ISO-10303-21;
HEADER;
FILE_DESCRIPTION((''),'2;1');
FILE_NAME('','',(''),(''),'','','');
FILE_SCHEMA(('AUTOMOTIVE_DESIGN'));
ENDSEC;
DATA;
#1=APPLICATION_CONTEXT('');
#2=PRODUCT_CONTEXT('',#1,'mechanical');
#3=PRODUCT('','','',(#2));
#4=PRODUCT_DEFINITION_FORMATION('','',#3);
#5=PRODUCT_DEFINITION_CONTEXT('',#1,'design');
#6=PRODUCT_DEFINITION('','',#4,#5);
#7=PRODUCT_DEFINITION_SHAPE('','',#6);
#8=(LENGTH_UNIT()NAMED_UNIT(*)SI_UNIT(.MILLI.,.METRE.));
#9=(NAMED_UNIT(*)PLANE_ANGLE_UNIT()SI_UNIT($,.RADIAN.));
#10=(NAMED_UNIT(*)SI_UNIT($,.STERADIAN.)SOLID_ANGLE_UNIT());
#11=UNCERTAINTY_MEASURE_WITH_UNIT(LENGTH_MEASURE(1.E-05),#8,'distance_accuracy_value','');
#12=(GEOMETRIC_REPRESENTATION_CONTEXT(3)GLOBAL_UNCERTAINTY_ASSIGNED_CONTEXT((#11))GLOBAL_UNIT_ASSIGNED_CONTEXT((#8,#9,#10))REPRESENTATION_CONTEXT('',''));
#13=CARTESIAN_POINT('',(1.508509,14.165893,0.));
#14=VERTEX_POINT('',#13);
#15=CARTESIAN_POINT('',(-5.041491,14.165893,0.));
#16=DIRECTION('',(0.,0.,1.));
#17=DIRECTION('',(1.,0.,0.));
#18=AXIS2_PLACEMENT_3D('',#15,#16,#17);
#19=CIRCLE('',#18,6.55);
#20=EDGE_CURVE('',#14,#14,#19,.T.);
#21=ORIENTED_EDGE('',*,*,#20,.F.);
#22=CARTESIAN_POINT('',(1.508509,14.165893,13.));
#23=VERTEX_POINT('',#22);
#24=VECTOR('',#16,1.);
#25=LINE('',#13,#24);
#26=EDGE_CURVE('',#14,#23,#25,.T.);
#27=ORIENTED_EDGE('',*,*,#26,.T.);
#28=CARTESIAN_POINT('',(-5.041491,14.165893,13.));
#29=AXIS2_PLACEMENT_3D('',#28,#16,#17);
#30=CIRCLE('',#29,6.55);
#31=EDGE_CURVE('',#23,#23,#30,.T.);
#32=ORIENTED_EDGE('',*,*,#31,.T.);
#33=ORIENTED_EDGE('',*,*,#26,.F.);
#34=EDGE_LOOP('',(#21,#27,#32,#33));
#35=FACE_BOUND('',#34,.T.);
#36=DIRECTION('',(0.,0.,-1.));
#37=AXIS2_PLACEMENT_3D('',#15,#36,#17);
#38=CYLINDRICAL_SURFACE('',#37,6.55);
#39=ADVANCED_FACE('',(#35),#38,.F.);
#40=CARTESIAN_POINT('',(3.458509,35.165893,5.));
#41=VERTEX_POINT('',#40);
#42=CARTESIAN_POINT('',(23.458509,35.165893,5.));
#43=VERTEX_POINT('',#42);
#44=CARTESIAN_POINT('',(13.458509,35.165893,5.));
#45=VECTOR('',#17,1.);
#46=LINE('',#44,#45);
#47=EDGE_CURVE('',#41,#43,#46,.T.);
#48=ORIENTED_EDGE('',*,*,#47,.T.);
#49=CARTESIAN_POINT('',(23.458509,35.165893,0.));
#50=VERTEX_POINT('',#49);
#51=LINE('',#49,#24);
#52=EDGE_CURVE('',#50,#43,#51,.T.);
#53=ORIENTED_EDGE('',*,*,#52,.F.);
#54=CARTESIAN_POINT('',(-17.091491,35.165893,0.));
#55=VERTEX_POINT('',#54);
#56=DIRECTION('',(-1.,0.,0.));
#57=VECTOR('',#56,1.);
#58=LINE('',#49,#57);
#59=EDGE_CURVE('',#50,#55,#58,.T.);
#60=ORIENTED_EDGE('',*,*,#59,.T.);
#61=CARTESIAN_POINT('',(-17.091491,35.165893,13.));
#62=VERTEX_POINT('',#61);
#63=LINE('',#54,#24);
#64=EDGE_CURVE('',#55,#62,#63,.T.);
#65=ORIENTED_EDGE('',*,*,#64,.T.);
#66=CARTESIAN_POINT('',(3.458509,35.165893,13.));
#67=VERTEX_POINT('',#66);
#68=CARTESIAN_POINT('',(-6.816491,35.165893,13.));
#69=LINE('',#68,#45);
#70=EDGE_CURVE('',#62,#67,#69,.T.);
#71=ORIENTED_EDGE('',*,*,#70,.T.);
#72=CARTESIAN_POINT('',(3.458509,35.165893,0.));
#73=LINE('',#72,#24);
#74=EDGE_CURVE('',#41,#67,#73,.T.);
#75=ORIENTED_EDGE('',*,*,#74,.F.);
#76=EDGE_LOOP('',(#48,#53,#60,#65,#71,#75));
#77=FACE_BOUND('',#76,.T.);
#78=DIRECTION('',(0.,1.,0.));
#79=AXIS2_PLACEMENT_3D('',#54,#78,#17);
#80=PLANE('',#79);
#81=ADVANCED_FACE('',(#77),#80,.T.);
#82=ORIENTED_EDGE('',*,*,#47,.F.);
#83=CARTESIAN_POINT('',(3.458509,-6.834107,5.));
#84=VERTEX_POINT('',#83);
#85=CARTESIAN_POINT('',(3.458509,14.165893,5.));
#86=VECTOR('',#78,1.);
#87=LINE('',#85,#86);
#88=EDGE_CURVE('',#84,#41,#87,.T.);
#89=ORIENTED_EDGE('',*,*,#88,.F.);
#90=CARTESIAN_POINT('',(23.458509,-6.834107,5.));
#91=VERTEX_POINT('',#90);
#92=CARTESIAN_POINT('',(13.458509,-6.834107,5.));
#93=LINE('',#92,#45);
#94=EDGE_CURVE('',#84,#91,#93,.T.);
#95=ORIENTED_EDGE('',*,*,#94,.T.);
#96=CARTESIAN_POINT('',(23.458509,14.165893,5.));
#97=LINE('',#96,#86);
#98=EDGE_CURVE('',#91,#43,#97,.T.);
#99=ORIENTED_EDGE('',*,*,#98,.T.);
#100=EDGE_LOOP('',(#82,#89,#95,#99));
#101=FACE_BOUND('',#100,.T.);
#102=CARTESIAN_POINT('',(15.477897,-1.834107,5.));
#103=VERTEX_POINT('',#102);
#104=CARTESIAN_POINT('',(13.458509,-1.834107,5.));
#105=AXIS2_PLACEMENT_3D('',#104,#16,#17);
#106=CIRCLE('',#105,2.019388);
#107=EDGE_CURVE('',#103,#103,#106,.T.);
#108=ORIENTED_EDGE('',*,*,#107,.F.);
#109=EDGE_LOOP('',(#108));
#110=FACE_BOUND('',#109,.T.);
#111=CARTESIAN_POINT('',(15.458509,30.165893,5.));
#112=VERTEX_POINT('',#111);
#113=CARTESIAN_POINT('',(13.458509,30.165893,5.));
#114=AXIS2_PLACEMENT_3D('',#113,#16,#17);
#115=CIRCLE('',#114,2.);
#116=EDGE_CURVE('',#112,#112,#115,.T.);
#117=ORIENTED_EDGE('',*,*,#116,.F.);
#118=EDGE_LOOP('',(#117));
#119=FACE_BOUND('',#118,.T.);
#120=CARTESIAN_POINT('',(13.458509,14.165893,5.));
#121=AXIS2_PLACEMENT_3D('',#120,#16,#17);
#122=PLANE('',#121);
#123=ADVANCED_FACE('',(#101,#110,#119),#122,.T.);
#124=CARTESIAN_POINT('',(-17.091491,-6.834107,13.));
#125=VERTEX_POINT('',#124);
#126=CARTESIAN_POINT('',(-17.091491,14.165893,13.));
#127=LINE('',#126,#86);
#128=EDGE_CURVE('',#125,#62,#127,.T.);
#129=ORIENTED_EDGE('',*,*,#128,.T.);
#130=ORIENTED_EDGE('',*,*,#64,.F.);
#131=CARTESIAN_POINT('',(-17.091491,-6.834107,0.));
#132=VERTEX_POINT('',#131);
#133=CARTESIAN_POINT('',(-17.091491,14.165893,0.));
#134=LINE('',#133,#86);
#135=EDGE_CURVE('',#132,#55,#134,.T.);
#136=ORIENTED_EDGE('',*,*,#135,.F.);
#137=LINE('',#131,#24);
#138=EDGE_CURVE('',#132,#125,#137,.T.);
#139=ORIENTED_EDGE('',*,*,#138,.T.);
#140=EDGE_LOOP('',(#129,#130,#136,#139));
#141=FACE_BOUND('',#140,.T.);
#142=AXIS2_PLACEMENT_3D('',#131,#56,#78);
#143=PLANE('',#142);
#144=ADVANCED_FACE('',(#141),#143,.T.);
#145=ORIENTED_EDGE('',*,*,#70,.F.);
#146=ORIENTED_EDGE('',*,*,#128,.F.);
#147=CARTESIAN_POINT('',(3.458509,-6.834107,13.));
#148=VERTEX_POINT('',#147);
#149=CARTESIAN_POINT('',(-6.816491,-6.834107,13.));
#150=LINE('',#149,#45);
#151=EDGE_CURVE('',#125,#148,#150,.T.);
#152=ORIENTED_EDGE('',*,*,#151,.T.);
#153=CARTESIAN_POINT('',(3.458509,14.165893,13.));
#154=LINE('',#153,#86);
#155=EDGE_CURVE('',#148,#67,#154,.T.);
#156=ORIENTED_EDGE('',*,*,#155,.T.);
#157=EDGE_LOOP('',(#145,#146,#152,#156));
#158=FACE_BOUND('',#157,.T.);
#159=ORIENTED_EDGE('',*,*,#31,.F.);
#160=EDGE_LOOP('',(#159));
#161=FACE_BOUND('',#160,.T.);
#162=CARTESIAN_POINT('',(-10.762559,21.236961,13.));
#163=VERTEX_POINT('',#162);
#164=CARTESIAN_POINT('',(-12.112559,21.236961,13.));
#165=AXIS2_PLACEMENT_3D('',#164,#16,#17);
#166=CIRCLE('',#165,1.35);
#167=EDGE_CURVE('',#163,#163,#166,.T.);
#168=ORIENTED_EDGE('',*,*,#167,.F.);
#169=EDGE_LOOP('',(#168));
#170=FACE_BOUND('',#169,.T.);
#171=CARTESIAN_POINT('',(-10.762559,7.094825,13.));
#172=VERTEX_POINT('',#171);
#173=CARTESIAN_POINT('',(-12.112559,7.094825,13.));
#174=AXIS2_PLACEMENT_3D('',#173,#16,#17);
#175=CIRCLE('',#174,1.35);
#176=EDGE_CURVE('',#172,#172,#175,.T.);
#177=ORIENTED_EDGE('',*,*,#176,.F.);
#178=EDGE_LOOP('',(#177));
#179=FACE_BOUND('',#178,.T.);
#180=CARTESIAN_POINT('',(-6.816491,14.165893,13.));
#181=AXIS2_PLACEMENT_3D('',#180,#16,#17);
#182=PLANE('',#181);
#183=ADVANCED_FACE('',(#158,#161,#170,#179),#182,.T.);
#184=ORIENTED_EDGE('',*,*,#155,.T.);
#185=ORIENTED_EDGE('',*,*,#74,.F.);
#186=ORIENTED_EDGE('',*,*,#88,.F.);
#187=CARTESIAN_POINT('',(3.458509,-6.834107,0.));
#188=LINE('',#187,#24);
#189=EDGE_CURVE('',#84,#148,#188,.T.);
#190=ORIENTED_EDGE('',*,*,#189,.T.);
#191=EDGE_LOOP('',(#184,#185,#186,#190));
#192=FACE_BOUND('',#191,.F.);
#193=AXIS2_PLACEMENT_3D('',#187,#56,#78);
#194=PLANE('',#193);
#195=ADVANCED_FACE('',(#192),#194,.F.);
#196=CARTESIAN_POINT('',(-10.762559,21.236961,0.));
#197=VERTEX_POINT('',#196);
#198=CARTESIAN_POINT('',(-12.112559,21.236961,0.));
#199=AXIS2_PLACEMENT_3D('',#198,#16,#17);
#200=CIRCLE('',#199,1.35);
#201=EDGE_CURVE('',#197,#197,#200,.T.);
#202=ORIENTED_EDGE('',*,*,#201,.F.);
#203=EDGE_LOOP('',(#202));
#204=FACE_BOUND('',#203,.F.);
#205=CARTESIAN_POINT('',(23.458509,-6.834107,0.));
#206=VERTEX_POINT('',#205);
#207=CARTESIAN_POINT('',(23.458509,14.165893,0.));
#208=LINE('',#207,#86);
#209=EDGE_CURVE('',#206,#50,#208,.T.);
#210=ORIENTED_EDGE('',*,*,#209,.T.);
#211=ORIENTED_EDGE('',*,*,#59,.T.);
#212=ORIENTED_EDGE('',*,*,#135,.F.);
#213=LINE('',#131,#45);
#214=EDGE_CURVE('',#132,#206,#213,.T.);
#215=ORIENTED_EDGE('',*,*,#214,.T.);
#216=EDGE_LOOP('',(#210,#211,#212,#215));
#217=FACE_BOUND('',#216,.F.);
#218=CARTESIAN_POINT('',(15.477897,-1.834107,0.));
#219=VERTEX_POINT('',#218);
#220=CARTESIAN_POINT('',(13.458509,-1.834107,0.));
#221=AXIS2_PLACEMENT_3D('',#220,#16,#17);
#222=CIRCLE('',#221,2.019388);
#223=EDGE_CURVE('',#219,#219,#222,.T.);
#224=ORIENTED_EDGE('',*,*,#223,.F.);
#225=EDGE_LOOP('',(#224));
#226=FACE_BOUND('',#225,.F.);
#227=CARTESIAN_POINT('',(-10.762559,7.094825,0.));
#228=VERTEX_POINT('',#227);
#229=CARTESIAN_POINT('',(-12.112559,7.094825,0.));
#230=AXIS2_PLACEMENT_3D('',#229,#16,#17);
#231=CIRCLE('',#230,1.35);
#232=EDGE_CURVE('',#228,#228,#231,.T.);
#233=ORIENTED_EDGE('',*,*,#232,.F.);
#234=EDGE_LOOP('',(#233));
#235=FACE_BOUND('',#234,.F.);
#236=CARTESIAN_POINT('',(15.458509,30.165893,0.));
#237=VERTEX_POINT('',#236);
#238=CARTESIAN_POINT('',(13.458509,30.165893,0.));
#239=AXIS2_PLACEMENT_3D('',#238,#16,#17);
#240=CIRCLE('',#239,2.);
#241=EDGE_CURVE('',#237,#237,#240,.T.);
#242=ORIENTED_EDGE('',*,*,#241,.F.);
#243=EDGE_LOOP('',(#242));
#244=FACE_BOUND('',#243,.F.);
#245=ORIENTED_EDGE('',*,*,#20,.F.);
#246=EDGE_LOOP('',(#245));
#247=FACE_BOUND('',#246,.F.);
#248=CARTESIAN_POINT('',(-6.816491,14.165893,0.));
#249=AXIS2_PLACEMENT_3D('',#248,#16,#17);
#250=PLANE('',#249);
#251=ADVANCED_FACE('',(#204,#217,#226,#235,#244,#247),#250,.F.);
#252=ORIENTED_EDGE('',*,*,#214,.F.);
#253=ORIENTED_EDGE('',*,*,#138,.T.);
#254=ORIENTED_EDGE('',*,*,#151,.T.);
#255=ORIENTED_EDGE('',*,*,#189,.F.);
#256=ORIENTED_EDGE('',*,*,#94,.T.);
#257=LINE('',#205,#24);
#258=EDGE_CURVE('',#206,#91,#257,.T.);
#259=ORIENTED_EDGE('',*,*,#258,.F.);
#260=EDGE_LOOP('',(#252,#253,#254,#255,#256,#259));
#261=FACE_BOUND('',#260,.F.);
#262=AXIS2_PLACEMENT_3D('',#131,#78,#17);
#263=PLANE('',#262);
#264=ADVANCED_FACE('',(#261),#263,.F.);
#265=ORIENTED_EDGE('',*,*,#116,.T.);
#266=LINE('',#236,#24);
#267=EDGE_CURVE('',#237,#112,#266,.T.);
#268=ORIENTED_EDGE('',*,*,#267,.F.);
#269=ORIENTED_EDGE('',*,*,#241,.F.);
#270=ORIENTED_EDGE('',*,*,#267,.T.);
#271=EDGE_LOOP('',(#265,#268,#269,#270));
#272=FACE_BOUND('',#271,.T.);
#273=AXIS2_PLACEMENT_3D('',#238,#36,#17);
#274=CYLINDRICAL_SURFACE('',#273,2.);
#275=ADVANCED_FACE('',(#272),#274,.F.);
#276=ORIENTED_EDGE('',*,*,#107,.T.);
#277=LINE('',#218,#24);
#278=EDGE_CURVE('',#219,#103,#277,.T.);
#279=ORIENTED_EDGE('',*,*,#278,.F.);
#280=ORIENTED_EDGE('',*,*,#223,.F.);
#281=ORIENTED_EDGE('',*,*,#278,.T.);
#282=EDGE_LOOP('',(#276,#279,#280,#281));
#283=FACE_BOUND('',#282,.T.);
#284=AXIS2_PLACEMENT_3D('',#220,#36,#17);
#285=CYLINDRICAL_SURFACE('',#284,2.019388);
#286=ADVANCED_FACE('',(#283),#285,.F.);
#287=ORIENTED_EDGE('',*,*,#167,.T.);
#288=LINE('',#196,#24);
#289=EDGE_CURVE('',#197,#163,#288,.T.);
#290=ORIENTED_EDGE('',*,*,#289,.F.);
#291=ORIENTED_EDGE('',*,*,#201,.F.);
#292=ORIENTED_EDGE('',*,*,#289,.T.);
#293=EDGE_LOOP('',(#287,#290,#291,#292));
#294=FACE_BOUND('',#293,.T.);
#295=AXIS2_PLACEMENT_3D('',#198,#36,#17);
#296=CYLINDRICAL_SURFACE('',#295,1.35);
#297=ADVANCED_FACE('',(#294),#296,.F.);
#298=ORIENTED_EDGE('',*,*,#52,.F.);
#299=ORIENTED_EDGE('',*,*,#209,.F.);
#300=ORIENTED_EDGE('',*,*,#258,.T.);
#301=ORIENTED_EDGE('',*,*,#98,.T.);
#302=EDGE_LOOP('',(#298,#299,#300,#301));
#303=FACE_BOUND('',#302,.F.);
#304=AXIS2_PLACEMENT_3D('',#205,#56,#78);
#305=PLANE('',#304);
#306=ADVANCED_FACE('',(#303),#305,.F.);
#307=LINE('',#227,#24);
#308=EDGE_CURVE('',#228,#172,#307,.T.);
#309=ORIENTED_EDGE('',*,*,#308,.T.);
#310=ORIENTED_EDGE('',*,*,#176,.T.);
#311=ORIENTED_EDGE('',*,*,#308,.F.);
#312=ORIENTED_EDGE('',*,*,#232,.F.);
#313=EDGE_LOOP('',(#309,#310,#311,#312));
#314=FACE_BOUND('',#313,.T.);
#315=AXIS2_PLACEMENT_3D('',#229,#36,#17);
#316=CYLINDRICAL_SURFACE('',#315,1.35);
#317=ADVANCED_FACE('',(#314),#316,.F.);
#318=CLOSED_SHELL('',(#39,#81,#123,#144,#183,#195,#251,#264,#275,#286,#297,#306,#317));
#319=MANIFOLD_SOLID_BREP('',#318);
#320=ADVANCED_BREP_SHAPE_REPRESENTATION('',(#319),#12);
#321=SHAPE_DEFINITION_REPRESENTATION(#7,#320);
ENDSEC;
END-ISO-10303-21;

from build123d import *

# Parameters (mm, degrees)
F0_W     = 20
F0_H     = 42
F0_R     = 2.0193883272
F0_R_2   = 2
F1_DEPTH = 5
F0_W_2   = 20.55
F0_R_3   = 1.35
F0_R_4   = 6.55
F2_DEPTH = 13


# Not quite as in the source:
# - a feature of the source that left no trace in its solid (it failed there, or was rolled back) is left out


with BuildPart() as f1:
    # F0 (on Top) → F1 (new body)
    with BuildSketch(Plane.XY):
        with Locations((13.4585087977, 14.1658929903)):
            Rectangle(F0_W, F0_H)
        with Locations((13.4585087977, -1.8341070097)):
            Circle(F0_R, mode=Mode.SUBTRACT)
        with Locations((13.4585087977, 30.1658929903)):
            Circle(F0_R_2, mode=Mode.SUBTRACT)
    extrude(amount=F1_DEPTH)

    # F0 (on Top) → F2 (join)
    with BuildSketch(Plane.XY):
        with Locations((-6.8164912023, 14.1658929903)):
            Rectangle(F0_W_2, F0_H)
        with Locations((-12.1125590142, 7.0948251784)):
            Circle(F0_R_3, mode=Mode.SUBTRACT)
        with Locations((-5.0414912023, 14.1658929903)):
            Circle(F0_R_4, mode=Mode.SUBTRACT)
        with Locations((-12.1125590142, 21.2369608022)):
            Circle(F0_R_3, mode=Mode.SUBTRACT)
    extrude(amount=F2_DEPTH)


solid = f1.part
